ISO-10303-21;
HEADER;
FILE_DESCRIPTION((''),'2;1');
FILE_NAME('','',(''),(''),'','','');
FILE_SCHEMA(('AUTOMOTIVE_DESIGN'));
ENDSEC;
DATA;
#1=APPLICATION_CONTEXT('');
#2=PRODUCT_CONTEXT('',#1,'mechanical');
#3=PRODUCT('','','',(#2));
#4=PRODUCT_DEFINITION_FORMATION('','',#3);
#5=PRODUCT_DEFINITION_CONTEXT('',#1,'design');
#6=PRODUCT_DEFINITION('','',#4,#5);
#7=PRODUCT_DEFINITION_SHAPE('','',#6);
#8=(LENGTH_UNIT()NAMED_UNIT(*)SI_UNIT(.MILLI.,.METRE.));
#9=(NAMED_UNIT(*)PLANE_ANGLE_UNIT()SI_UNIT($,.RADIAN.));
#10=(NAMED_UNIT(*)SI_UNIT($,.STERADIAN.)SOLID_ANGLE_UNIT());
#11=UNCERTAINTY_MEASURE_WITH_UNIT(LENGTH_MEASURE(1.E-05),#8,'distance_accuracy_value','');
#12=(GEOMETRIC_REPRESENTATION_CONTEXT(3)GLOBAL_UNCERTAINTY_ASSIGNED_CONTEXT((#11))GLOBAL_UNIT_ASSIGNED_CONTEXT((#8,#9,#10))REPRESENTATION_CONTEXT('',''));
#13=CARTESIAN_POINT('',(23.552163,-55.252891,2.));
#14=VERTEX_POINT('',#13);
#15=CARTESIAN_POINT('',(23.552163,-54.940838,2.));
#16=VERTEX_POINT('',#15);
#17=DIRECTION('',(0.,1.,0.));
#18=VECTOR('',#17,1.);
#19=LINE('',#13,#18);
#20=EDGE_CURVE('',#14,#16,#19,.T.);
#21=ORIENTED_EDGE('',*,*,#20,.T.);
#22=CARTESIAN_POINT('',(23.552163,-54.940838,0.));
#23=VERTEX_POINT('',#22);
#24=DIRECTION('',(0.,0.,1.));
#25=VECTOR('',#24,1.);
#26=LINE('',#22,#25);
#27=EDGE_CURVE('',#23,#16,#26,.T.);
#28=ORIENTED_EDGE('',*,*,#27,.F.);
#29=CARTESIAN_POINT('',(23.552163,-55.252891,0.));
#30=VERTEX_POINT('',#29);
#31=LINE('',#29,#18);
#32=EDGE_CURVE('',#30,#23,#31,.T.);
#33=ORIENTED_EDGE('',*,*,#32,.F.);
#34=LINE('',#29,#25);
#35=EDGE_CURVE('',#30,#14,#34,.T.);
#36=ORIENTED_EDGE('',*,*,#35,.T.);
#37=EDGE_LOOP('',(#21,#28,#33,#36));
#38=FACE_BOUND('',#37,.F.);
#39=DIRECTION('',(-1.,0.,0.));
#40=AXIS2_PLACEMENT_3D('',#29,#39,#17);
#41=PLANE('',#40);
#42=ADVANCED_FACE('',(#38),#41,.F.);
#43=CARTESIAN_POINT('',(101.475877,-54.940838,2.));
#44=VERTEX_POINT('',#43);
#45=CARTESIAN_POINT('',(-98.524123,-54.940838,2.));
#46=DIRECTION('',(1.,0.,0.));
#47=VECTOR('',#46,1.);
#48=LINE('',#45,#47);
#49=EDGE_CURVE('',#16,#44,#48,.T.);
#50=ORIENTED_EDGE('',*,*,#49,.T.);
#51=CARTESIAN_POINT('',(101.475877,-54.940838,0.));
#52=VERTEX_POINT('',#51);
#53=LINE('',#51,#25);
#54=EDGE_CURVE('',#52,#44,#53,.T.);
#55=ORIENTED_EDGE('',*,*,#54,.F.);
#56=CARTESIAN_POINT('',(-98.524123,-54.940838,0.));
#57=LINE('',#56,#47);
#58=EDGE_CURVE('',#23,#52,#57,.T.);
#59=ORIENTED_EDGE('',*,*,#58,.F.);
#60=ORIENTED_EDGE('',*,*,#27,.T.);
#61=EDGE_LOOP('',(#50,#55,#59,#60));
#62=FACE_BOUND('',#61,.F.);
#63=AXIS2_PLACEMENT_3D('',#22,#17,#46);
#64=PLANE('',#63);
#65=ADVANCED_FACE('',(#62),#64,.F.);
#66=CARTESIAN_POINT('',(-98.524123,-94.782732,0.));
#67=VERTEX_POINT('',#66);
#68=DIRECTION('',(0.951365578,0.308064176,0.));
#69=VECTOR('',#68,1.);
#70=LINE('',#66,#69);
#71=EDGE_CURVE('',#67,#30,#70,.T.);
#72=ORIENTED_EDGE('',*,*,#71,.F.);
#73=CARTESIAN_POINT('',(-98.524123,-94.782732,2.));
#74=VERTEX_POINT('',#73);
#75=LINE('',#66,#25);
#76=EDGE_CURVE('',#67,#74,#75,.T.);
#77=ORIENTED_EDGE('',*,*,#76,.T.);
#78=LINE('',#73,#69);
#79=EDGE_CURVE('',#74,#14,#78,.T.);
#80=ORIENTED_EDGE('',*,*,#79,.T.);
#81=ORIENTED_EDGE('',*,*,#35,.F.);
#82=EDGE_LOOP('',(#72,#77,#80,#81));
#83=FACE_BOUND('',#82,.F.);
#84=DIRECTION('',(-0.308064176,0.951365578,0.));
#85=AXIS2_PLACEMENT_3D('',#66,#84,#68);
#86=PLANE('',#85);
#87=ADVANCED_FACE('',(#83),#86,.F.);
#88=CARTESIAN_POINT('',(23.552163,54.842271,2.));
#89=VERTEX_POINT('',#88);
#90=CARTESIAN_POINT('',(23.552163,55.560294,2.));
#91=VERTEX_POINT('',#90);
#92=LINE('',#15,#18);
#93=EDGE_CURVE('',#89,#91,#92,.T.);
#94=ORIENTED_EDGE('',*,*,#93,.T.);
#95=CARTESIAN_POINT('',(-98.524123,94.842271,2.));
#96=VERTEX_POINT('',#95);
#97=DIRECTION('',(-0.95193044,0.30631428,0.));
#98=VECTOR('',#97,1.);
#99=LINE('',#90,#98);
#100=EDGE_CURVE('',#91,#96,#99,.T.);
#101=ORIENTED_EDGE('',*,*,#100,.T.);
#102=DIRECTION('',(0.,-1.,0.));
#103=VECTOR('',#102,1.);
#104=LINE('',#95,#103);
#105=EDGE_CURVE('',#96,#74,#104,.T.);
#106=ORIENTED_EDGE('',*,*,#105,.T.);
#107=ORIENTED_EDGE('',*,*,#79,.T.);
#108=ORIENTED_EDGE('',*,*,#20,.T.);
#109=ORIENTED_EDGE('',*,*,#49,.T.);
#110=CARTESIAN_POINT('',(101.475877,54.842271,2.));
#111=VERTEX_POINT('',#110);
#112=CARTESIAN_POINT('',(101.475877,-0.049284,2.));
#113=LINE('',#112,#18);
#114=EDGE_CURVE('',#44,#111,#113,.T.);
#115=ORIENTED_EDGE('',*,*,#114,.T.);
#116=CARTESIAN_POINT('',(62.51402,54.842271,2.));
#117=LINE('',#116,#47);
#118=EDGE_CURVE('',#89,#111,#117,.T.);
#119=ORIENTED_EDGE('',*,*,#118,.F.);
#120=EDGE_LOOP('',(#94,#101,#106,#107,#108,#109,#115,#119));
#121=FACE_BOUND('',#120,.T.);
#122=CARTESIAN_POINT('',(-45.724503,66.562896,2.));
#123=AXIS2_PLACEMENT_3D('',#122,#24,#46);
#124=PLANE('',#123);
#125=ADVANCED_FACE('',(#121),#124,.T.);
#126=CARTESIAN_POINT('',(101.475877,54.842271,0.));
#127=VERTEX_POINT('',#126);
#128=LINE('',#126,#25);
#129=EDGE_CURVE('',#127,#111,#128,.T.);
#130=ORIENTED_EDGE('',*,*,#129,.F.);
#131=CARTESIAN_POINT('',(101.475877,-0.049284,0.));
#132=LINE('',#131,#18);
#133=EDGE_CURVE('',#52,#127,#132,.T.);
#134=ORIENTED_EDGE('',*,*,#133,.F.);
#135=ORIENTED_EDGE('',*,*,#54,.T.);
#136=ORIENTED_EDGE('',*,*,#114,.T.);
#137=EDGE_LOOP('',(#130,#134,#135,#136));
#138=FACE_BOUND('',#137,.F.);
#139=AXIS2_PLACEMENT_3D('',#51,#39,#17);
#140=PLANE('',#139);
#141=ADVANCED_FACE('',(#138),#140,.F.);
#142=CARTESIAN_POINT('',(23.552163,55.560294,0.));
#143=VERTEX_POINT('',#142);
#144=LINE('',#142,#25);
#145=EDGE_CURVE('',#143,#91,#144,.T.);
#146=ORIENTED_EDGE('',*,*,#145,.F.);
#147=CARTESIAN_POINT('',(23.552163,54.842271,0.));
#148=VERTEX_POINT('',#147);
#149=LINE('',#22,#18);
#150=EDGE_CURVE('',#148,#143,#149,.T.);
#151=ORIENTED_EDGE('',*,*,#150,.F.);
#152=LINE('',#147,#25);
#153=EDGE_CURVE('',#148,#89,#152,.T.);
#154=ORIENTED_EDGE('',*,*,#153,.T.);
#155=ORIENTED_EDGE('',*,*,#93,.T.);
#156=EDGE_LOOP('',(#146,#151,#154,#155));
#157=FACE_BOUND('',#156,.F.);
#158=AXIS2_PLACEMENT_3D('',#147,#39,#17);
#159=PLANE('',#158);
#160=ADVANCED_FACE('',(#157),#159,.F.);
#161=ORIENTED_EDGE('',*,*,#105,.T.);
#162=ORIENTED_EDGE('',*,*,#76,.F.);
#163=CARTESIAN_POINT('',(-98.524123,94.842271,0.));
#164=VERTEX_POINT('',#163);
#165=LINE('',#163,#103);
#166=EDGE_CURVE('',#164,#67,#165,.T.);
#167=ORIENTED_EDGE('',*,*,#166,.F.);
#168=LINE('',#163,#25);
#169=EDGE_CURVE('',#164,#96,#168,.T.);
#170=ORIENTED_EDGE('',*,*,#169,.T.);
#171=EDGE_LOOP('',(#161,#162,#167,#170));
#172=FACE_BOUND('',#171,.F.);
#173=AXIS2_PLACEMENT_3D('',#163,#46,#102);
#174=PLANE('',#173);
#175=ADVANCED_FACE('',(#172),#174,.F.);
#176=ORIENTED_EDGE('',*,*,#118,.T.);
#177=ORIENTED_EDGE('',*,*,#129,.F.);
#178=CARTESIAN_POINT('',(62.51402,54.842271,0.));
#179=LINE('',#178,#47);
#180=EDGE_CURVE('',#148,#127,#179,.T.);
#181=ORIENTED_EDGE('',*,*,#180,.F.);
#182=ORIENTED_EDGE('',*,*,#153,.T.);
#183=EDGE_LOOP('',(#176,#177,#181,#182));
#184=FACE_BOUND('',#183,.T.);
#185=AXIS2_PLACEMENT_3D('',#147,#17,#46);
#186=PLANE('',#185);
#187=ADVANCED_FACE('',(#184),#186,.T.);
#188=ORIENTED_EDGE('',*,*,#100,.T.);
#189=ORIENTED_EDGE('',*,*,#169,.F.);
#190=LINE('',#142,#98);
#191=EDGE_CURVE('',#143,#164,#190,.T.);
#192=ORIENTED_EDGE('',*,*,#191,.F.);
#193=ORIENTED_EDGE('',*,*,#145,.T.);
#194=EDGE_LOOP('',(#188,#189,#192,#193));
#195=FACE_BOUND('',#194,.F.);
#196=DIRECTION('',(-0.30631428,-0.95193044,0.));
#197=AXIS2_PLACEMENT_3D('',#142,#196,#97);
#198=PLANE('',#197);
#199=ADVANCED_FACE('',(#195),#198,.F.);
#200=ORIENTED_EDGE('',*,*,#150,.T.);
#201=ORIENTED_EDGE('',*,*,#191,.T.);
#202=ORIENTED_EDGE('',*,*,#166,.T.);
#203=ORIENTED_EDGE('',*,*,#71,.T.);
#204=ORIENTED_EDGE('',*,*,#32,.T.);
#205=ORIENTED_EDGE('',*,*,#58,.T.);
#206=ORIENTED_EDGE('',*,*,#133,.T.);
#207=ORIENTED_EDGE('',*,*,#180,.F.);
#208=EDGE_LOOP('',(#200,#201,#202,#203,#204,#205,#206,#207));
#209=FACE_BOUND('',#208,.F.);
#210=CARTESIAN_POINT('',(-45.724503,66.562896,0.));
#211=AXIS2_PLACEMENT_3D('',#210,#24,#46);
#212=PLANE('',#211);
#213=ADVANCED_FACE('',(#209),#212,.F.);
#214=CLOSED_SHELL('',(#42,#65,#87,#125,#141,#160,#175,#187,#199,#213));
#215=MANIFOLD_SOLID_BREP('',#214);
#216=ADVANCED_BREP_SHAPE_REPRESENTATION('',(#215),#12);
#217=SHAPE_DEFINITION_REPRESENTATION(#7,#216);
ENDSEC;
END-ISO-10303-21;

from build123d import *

# Parameters (mm, degrees)
F0_W     = 77.923713997
F0_H     = 109.7831092775
F1_DEPTH = 2


with BuildPart() as f1:
    # F0 (on Top) → F1 (new body)
    with BuildSketch(Plane.XY):
        Polygon((-98.5241234303, 94.8422709107), (-98.5241234303, 54.8422709107), (23.5521625727, 54.8422709107), (23.5521625727, 55.5602938927), align=None)
        Polygon((23.5521625727, 54.8422709107), (-98.5241234303, 54.8422709107), (-98.5241234303, -54.8019595444), (-98.5241234303, -54.9408383667), (23.5521625727, -54.9408383667), align=None)
        with Locations((62.5140195712, -0.049283728)):
            Rectangle(F0_W, F0_H)
        Polygon((23.5521625727, -55.2528910339), (23.5521625727, -54.9408383667), (-98.5241234303, -54.9408383667), (-98.5241234303, -94.7827324271), align=None)
    extrude(amount=F1_DEPTH)


solid = f1.part
